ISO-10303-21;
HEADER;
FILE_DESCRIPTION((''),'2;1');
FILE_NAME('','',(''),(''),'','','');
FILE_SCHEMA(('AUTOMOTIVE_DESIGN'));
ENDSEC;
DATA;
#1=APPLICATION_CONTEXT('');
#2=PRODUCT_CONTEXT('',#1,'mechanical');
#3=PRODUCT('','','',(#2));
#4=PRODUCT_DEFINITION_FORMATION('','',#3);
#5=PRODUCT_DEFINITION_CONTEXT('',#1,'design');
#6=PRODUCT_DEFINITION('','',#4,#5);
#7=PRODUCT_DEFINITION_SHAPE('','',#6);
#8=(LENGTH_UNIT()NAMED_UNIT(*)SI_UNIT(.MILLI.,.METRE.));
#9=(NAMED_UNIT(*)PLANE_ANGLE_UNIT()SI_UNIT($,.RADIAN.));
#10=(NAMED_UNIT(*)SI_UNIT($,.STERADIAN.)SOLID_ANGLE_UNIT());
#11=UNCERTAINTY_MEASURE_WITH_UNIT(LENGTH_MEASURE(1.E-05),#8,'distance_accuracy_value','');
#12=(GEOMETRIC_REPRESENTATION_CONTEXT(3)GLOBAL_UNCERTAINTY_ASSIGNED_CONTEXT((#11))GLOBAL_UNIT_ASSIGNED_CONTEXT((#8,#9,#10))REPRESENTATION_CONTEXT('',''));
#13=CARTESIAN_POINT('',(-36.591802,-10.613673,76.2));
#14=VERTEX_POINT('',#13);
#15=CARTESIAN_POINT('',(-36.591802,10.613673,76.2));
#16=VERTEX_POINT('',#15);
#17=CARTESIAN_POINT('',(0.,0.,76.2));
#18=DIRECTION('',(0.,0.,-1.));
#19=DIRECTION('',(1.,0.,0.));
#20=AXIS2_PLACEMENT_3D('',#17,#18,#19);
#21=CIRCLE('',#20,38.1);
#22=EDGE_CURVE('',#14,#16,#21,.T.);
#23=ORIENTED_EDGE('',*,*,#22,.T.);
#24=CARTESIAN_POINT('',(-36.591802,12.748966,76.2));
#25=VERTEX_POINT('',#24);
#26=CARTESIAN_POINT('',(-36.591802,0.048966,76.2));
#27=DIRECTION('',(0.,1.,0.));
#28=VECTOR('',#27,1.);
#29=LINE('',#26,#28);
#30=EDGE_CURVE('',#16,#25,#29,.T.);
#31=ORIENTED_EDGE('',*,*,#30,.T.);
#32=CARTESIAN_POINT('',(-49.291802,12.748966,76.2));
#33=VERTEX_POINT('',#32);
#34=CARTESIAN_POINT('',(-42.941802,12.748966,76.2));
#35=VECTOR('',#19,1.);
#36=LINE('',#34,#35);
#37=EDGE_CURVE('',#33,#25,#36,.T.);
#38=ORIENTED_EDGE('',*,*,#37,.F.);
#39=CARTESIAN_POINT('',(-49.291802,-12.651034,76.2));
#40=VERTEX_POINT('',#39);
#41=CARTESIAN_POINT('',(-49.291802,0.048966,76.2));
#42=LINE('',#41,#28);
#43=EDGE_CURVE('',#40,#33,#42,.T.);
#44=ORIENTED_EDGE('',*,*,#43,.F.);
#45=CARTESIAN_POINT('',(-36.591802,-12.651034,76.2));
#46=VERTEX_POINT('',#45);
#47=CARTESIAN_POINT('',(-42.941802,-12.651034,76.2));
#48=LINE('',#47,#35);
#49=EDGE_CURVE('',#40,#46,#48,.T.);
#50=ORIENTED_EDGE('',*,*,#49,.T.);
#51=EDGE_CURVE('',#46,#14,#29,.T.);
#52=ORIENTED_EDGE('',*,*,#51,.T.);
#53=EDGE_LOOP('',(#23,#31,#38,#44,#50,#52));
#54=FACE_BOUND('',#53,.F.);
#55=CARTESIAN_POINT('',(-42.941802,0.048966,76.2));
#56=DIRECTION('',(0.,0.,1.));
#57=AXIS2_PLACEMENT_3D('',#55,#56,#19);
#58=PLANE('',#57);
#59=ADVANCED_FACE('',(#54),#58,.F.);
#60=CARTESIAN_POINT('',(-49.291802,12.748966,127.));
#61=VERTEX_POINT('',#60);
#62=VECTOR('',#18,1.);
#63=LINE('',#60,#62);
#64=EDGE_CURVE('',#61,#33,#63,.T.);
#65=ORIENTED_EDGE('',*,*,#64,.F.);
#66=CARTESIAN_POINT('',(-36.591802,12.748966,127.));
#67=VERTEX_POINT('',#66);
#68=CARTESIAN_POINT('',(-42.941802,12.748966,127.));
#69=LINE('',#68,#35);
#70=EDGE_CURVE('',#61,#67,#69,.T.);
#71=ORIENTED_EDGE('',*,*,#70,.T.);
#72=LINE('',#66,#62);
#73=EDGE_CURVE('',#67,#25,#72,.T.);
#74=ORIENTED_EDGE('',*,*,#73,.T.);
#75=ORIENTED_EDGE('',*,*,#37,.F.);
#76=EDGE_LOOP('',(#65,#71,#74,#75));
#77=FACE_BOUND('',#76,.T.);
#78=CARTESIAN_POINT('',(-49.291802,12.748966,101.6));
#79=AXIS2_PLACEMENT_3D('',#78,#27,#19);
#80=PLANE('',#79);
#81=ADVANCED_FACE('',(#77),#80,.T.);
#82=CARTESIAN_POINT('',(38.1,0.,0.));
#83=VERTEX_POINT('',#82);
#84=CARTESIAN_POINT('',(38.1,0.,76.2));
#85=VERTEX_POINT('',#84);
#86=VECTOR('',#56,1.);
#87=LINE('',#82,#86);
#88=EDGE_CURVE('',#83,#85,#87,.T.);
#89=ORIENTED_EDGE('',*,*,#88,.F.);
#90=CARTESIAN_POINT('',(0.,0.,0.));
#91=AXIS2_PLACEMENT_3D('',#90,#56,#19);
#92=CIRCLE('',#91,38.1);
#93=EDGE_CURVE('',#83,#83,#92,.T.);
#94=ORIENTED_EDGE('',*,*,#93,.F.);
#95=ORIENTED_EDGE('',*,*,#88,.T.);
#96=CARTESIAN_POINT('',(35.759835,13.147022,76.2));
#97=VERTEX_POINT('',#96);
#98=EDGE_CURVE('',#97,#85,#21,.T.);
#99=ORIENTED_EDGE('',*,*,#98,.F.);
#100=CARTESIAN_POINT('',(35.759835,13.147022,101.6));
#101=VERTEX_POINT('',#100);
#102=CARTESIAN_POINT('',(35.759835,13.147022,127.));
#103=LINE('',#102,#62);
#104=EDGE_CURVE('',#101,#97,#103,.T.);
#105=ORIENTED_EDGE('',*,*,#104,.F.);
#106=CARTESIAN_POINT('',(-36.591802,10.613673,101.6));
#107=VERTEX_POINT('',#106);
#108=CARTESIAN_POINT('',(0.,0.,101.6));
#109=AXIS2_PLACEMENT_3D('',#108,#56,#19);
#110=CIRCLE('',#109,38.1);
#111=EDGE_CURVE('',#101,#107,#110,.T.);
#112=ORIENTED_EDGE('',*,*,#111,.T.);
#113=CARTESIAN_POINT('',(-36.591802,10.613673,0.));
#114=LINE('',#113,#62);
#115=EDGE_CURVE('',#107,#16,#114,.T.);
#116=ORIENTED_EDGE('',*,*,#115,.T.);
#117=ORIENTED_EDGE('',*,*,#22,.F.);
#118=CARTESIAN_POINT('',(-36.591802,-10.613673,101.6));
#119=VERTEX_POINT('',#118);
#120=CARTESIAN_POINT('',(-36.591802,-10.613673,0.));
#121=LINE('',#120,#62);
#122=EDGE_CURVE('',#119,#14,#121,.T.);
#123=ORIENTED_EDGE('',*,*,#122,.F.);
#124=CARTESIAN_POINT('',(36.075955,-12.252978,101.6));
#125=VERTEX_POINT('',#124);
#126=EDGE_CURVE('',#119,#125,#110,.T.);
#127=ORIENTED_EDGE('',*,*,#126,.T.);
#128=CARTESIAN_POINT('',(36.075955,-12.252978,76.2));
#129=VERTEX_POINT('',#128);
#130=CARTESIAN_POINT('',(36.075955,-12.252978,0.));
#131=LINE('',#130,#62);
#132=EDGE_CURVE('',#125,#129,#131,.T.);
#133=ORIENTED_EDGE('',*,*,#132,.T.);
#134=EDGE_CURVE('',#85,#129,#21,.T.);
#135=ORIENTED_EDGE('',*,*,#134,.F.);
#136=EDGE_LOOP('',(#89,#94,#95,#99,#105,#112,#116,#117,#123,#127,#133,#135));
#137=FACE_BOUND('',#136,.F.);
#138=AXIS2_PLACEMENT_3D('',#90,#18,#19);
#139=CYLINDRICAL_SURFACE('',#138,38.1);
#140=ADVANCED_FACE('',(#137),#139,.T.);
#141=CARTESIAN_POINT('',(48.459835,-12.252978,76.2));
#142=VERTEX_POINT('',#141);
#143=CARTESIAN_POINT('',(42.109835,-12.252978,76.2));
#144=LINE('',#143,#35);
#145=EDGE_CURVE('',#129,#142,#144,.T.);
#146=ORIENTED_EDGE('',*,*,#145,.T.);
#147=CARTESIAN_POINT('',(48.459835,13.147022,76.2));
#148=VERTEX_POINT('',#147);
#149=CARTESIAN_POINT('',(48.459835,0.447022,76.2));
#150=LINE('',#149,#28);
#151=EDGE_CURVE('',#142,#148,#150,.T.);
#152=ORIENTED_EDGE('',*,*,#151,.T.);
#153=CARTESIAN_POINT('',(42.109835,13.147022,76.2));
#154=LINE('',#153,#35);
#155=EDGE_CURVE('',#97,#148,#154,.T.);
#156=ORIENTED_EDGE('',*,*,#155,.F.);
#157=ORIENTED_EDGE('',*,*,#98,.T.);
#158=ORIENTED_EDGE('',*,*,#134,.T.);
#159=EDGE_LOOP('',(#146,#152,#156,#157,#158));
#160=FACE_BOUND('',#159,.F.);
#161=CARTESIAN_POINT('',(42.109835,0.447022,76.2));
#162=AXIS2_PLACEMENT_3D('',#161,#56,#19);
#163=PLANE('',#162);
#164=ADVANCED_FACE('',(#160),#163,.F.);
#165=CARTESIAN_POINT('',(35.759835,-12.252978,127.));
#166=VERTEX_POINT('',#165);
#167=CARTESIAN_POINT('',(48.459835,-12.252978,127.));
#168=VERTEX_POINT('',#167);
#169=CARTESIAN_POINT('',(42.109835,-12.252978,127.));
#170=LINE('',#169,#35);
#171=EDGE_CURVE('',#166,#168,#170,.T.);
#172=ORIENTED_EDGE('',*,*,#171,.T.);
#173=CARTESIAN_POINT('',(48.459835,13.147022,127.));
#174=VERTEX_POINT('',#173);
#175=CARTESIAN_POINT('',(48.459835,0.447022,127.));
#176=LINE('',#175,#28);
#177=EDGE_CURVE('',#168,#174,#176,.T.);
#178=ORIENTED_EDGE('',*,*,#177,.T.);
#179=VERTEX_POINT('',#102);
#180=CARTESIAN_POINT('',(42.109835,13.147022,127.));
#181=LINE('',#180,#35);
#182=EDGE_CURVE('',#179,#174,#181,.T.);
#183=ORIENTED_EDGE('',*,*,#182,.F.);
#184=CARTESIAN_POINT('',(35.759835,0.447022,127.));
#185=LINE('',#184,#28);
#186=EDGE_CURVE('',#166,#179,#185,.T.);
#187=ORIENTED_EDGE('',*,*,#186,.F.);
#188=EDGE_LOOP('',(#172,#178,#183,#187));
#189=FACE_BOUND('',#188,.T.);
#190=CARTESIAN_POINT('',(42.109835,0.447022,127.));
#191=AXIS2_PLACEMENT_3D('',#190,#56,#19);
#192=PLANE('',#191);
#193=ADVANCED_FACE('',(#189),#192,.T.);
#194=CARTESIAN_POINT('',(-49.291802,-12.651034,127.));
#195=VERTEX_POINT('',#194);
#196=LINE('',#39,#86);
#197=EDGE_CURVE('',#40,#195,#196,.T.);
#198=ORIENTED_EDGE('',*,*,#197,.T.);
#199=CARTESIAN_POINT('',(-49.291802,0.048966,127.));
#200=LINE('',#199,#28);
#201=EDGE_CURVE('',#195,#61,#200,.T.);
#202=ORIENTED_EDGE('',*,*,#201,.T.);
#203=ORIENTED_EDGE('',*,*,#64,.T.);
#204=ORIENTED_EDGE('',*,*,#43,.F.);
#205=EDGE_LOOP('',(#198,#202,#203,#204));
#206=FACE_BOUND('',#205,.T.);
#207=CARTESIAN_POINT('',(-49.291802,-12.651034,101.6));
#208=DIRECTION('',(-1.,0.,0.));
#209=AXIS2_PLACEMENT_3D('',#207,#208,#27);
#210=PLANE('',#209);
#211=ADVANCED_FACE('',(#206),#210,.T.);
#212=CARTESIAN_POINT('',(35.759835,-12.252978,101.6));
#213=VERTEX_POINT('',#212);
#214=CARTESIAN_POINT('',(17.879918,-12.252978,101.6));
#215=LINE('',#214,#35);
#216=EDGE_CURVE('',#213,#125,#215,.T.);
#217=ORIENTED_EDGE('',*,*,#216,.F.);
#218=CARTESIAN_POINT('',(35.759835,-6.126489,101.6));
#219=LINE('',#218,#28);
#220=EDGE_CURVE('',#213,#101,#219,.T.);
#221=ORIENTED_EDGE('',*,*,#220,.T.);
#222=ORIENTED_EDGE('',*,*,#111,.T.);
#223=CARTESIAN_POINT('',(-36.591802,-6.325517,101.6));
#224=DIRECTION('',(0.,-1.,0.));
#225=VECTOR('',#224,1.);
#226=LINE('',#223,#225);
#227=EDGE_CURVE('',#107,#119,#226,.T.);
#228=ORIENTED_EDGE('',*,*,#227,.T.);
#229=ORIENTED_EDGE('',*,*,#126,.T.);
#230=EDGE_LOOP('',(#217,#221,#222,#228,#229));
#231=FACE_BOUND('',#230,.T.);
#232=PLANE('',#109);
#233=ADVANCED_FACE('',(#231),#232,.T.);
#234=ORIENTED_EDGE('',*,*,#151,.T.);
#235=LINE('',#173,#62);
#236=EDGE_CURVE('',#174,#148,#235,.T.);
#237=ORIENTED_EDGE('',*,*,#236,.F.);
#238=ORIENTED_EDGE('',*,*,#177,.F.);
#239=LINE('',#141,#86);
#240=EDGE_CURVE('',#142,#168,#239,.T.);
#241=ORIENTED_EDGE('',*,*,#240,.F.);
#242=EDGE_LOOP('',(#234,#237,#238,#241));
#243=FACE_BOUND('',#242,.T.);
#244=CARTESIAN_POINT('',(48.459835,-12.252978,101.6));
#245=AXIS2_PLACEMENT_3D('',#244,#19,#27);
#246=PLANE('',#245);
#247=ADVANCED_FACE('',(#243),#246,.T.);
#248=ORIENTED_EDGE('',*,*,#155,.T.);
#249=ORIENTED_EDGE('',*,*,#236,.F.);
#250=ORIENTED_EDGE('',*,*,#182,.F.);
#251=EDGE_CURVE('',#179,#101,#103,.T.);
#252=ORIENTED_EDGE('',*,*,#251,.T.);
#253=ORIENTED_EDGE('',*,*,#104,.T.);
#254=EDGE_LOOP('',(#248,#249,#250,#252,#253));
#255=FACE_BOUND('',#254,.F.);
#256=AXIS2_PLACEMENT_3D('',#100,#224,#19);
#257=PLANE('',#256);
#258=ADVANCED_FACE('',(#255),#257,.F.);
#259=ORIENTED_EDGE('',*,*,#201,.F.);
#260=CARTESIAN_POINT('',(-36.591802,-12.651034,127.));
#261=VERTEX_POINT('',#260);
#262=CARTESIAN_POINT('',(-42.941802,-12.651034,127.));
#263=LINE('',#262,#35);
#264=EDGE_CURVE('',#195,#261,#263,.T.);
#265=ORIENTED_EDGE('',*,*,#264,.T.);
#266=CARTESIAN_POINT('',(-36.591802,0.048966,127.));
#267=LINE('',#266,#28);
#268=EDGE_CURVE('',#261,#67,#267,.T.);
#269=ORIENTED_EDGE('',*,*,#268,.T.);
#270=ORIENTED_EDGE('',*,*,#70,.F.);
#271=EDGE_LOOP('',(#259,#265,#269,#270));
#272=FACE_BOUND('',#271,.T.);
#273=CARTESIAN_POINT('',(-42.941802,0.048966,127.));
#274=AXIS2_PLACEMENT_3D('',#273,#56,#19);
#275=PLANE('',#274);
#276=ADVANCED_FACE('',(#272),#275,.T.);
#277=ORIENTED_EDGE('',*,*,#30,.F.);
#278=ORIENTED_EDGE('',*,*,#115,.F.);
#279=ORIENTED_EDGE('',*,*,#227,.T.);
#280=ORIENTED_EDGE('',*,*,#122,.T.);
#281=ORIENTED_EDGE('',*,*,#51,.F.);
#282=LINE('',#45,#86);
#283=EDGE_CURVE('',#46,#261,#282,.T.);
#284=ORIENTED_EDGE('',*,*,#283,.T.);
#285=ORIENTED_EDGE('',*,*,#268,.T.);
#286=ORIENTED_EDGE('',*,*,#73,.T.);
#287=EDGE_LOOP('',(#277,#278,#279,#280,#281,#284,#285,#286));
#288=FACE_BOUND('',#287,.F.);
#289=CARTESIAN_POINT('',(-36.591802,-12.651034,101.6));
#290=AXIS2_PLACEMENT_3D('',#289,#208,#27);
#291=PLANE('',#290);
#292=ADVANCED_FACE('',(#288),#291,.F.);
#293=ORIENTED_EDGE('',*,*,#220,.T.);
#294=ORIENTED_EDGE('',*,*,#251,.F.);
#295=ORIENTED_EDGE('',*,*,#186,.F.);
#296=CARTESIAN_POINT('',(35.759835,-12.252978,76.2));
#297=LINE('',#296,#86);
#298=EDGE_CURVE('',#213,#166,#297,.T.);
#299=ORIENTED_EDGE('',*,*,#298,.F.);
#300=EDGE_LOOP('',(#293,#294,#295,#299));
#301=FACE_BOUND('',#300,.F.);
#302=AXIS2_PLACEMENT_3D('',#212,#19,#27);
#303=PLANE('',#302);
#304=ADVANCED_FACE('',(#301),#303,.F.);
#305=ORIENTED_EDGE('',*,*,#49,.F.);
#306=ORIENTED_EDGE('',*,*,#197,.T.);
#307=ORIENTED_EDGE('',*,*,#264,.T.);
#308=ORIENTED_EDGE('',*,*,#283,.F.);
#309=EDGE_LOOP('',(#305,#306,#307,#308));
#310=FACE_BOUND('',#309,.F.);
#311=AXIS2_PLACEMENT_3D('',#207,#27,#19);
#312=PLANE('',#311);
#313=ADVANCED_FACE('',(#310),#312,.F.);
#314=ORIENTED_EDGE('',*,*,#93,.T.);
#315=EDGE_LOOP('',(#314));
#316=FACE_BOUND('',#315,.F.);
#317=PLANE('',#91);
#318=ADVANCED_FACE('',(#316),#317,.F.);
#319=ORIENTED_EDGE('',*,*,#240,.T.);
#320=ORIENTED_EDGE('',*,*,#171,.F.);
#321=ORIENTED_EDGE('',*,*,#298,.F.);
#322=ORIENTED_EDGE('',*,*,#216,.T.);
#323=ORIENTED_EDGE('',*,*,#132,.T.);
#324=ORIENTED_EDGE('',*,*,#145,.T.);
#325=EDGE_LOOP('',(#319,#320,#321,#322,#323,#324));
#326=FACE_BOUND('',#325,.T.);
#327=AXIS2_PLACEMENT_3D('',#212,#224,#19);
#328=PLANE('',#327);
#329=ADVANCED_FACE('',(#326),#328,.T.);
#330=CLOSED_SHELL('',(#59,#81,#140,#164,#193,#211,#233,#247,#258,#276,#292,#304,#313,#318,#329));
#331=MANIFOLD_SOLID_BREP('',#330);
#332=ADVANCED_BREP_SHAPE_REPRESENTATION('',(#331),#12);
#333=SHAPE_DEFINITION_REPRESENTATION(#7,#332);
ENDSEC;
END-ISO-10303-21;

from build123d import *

# Parameters (mm, degrees)
F0_R     = 38.1
F1_DEPTH = 101.6
F2_W     = 12.7
F2_H     = 25.4
F3_DEPTH = 25.4


# Not quite as in the source:
# - a feature of the source that left no trace in its solid (it failed there, or was rolled back) is left out


with BuildPart() as f1:
    # F0 (on Top) → F1 (new body)
    with BuildSketch(Plane.XY):
        Circle(F0_R)
    extrude(amount=F1_DEPTH)

    # F2 (on face) → F3 (join, symmetric)
    with BuildSketch(Plane.XY.offset(101.6)):
        with Locations((-42.9418016334, 0.0489659142)):
            Rectangle(F2_W, F2_H)
        with Locations((42.1098351814, 0.4470220127)):
            Rectangle(F2_W, F2_H)
    extrude(amount=F3_DEPTH, both=True)


solid = f1.part
